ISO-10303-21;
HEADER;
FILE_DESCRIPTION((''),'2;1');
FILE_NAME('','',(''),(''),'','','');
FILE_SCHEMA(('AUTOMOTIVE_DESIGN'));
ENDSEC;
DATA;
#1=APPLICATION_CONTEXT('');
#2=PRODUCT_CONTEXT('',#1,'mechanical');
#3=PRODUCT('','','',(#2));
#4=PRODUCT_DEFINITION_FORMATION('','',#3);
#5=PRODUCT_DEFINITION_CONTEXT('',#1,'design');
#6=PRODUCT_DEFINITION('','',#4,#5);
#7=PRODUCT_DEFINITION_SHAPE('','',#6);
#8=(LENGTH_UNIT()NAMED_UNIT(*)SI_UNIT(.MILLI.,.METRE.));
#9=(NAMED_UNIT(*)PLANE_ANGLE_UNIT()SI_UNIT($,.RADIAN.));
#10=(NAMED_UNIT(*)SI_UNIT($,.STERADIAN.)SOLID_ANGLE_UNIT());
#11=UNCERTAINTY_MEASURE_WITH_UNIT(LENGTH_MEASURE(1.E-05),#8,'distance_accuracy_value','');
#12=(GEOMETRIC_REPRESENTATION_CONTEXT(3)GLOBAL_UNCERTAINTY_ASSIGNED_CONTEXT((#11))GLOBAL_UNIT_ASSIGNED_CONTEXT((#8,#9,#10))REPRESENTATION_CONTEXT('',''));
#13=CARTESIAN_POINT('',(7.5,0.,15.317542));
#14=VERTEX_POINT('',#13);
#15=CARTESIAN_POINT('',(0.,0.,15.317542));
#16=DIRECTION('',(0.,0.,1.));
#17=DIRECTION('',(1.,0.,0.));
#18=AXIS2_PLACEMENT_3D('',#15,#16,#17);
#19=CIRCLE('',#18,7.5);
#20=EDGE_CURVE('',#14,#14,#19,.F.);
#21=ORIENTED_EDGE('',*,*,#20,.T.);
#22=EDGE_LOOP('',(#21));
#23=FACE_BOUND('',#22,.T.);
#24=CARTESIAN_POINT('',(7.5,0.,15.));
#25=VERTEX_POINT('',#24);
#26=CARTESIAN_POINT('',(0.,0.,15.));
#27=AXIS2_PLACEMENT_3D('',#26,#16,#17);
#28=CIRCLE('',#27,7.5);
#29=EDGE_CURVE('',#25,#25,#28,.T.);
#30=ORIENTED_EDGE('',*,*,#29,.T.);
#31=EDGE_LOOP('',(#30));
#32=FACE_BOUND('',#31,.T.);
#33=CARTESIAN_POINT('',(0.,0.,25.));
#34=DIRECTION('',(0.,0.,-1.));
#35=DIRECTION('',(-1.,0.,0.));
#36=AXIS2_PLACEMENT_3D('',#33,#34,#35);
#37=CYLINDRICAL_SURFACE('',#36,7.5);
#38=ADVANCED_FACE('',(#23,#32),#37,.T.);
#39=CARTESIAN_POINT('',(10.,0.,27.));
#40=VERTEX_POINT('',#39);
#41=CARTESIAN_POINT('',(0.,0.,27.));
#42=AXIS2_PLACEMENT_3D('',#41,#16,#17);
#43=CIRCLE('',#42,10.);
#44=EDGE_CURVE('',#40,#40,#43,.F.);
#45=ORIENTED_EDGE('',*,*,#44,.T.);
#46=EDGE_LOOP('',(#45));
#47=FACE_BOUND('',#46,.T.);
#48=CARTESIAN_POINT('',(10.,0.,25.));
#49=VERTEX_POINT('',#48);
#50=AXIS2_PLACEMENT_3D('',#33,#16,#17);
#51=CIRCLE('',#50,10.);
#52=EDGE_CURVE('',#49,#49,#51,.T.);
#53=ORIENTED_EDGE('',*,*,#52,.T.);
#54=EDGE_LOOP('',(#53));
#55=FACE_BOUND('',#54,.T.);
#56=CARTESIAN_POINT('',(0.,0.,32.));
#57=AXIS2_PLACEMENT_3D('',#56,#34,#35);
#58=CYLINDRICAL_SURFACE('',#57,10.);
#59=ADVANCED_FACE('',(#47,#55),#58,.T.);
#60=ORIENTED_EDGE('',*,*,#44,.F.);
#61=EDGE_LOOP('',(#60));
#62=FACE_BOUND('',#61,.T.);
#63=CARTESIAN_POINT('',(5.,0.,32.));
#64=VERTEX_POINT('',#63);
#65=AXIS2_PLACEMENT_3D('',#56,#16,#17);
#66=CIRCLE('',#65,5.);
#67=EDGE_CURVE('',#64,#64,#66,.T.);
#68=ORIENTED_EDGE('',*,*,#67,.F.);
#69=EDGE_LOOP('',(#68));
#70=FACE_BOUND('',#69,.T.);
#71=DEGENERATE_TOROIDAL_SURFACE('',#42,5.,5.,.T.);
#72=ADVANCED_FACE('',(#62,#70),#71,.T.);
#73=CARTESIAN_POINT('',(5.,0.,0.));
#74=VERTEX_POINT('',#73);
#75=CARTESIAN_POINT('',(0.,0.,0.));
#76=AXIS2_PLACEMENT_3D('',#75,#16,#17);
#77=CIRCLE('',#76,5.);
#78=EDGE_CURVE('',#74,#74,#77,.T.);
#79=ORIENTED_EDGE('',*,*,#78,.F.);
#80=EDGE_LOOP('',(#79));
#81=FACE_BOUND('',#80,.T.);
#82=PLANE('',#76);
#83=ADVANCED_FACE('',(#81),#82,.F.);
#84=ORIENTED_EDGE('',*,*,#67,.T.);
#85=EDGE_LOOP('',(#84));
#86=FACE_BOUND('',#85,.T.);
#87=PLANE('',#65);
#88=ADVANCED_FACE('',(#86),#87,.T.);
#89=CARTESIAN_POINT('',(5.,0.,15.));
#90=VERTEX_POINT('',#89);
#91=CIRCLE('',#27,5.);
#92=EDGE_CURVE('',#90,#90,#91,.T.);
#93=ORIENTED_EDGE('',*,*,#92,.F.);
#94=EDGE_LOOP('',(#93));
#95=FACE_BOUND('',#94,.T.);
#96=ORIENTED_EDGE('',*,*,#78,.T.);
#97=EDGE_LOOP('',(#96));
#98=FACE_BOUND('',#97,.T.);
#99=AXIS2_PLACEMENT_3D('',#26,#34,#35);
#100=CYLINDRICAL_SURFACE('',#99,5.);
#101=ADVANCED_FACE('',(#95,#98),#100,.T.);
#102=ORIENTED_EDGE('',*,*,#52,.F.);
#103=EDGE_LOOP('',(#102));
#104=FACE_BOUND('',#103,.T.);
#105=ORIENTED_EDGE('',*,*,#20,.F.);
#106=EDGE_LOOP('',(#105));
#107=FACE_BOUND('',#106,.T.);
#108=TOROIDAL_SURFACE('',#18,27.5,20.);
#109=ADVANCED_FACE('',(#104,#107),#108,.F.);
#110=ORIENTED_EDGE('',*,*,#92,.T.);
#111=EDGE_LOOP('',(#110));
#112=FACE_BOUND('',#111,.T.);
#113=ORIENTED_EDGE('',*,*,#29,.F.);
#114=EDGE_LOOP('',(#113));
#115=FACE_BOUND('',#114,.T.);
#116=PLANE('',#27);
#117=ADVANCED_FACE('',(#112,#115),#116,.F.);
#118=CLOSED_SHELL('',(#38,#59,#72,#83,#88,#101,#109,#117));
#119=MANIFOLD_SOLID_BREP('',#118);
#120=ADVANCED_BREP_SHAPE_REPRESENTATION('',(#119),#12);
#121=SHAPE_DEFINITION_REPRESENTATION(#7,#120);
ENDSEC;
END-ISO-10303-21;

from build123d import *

# Parameters (mm, degrees)
SKETCH1_R           = 5
BOSS_EXTRUDE1_DEPTH = 15
SKETCH2_R           = 7.5
BOSS_EXTRUDE2_DEPTH = 10
SKETCH3_R           = 10
BOSS_EXTRUDE3_DEPTH = 7
FILLET1_R           = 20
FILLET2_R           = 5


with BuildPart() as part:
    # Sketch1 → Boss-Extrude1 (new body)
    with BuildSketch(Plane.XY):
        Circle(SKETCH1_R)
    extrude(amount=BOSS_EXTRUDE1_DEPTH)

    # Sketch2 → Boss-Extrude2 (add)
    with BuildSketch(Plane.XY.offset(15)):
        Circle(SKETCH2_R)
    extrude(amount=BOSS_EXTRUDE2_DEPTH)

    # Sketch3 → Boss-Extrude3 (add)
    with BuildSketch(Plane.XY.offset(25)):
        Circle(SKETCH3_R)
    extrude(amount=BOSS_EXTRUDE3_DEPTH)

    # Fillet1
    # the kernel refuses this fillet: 20 mm, written as the material it adds along each edge
    with BuildSketch(Plane(origin=(0, 0, 25), x_dir=(1, 0, 0), z_dir=(0, -1, 0))) as fillet1_piece_1:
        with BuildLine():
            CenterArc((27.5, -9.682458366), FILLET1_R, 151.044975628, 28.955024372)
            Line((7.5, -9.682458366), (7.1, -9.682458366))
            Line((7.1, -9.682458366), (7.1, 0))
            Line((7.1, 0), (7.5, 0.4))
            ThreePointArc((7.5, 0.4), (8.75, 0.4), (9.65, 0.193649167))
            Line((9.65, 0.193649167), (10, 0))
        make_face()
    revolve(axis=Axis((0, 0, 25), (0, 0, 1)))

    # Fillet2
    fillet2_edges = [part.edges().sort_by_distance(p)[0] for p in [
        (-10, 0, 32),
    ]]
    fillet(fillet2_edges, radius=FILLET2_R)


solid = part.part
